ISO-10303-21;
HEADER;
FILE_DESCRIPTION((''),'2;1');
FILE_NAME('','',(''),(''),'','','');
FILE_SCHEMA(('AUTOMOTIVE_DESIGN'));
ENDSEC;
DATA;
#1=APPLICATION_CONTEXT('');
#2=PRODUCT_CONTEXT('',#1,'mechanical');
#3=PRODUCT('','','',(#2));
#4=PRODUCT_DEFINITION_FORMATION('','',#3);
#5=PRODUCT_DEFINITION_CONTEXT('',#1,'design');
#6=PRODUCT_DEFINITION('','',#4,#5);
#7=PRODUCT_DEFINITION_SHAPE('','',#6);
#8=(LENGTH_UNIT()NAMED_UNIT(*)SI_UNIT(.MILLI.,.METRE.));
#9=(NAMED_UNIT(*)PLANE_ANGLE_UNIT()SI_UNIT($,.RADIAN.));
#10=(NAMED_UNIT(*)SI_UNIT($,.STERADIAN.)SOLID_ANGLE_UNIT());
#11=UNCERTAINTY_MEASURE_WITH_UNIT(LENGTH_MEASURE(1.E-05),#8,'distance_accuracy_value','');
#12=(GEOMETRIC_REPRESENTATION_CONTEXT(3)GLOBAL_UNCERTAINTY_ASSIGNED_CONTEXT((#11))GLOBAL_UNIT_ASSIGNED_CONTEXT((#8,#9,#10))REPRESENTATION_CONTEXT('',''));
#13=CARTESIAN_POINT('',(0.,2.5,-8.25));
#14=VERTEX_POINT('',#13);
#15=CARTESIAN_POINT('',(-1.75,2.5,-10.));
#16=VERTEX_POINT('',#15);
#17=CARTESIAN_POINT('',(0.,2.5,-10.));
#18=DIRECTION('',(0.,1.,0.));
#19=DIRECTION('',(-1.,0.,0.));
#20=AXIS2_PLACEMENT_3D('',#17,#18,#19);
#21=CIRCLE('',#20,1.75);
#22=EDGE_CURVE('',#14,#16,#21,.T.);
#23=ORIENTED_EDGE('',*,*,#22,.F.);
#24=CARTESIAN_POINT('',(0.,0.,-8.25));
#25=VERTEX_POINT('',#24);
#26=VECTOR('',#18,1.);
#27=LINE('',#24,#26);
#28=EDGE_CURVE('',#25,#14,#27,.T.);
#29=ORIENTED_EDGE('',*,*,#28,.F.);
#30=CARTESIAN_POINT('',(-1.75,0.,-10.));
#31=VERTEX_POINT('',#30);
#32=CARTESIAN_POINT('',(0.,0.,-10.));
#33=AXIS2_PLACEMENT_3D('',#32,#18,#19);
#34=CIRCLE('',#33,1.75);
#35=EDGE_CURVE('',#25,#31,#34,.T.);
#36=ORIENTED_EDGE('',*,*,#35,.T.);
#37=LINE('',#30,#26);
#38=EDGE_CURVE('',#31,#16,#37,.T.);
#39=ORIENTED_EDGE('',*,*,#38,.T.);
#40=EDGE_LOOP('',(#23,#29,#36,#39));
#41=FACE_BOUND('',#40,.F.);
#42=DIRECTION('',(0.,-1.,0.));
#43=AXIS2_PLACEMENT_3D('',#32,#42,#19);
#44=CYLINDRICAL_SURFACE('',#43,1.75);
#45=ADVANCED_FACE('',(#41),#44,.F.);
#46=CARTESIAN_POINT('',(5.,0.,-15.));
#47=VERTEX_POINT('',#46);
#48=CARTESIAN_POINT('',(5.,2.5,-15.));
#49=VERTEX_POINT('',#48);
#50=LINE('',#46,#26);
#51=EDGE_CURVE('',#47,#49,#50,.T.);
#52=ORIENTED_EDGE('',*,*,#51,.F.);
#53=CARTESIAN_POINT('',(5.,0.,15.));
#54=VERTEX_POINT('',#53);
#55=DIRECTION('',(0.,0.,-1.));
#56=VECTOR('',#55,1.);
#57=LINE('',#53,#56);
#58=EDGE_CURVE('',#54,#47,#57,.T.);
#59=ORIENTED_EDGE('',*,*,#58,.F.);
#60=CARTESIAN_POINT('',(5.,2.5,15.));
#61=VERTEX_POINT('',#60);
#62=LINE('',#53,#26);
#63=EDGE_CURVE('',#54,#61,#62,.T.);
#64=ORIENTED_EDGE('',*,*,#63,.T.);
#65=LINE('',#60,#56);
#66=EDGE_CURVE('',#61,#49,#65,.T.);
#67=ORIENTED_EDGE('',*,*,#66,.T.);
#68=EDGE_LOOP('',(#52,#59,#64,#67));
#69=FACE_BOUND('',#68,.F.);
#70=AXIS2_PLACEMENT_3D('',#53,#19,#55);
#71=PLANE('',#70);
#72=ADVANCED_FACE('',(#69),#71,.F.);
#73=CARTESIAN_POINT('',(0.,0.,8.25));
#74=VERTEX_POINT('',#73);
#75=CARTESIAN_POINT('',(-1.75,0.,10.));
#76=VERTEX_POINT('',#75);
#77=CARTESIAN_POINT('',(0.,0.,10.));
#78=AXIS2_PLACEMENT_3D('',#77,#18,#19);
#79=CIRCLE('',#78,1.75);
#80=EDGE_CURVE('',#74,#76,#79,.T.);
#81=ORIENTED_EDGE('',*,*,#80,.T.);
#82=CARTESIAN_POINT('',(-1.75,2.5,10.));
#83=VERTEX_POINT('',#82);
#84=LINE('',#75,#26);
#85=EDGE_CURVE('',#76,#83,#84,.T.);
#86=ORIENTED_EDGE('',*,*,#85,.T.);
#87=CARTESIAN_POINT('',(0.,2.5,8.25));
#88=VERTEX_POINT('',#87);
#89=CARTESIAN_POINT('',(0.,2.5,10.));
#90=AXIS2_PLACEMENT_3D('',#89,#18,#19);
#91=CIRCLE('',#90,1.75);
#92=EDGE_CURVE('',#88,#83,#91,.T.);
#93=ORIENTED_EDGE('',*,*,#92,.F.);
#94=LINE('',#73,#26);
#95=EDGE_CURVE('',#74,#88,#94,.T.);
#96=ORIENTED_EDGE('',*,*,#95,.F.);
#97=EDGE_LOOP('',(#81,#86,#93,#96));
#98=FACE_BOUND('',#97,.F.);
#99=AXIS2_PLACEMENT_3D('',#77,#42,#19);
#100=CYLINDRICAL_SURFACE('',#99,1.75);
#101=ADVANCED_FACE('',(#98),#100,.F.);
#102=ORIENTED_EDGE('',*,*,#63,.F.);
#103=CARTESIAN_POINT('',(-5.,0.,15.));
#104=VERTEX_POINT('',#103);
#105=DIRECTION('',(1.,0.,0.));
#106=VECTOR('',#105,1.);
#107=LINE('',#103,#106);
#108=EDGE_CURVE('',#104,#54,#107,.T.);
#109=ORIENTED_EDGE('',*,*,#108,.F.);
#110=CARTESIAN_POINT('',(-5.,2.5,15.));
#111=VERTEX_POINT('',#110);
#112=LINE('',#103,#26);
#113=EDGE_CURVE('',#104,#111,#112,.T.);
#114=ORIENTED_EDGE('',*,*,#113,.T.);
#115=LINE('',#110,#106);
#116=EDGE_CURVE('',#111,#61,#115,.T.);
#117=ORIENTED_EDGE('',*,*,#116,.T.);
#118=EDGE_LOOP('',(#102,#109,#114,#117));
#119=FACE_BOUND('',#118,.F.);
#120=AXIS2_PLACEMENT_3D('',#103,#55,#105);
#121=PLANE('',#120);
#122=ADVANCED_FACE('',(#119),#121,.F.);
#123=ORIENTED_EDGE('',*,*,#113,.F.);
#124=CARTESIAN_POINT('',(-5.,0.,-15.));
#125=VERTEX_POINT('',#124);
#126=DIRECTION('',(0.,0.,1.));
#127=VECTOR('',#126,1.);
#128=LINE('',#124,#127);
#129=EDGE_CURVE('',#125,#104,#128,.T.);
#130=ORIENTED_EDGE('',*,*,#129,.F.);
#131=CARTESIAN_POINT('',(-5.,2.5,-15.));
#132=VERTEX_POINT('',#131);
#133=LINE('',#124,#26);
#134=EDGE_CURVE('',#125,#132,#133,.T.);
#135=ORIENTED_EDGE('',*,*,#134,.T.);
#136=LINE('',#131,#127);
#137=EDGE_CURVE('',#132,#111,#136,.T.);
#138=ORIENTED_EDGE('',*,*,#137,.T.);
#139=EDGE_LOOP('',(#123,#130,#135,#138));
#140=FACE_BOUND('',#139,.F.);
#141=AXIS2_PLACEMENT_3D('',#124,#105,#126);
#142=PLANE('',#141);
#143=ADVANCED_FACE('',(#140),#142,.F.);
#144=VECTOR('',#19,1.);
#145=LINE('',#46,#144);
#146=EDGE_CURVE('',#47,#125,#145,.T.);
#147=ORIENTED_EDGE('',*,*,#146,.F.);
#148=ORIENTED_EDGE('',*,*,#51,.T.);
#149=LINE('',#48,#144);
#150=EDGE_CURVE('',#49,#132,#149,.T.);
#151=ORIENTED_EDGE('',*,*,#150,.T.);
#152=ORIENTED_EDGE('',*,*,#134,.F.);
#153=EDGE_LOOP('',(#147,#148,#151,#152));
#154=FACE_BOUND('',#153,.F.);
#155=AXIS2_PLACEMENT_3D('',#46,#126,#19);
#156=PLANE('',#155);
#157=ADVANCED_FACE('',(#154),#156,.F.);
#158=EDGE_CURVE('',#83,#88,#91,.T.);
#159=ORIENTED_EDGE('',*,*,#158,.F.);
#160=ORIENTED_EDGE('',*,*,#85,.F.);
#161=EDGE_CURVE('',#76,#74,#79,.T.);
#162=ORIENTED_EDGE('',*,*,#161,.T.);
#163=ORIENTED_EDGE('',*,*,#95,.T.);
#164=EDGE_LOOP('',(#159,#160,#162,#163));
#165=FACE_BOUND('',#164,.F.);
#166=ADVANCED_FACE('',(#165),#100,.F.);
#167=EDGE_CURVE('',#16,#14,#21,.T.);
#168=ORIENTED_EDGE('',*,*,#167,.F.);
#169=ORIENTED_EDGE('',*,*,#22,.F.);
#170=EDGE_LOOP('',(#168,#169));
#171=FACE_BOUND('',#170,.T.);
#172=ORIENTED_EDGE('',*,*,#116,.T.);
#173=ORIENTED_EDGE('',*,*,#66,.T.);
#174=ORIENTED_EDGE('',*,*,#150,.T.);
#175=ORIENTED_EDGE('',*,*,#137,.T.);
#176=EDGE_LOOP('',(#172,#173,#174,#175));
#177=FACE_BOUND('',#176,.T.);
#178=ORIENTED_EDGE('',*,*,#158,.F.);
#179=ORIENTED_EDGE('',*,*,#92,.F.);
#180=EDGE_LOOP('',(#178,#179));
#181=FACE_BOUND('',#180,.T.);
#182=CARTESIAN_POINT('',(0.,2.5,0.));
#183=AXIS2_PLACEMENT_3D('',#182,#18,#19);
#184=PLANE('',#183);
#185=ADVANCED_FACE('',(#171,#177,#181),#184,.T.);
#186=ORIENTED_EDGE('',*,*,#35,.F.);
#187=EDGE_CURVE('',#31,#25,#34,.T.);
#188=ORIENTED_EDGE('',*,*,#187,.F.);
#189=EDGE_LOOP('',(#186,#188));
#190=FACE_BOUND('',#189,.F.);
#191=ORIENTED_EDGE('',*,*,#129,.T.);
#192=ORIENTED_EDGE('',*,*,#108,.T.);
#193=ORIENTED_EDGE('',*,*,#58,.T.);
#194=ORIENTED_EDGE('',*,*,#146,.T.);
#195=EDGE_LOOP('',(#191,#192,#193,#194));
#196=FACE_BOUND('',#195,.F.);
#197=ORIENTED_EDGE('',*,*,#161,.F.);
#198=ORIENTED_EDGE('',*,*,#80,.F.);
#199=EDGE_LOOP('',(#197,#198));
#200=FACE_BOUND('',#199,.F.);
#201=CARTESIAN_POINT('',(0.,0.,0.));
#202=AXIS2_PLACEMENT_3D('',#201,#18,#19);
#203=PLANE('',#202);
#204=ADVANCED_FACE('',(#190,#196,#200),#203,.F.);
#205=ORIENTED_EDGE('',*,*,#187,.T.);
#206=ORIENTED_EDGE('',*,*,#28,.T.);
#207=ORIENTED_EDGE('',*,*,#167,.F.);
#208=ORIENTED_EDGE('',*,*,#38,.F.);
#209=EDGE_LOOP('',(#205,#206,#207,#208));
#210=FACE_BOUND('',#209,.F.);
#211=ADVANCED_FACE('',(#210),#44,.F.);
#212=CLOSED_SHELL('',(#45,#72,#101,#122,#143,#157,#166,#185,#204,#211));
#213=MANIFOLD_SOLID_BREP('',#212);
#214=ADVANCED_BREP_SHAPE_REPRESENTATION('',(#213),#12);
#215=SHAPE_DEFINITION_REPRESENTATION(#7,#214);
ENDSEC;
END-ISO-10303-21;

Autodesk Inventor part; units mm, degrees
ref_plane "YZ Plane" through (0, 0, 0) normal (1, 0, 0) x (0, 1, 0)
ref_plane "XZ Plane" through (0, 0, 0) normal (0, 1, 0) x (-1, 0, 0)
ref_plane "XY Plane" through (0, 0, 0) normal (0, 0, 1) x (1, 0, 0)
sketch "Boceto1" plane through (0, 0, 0) normal (0, 1, 0) x (-1, 0, 0)
  circle A0 centre (0, 10) radius 1.75
  circle A1 centre (0, -10) radius 1.75
  line L0 (0, 10) -> (0, -10)
  line L1 (5, 15) -> (-5, 15)
  line L2 (-5, 15) -> (-5, -15)
  line L3 (-5, -15) -> (5, -15)
  line L4 (5, -15) -> (5, 15)
  line L5 (5, 15) -> (-5, -15) construction
  line L6 (-5, 15) -> (5, -15) construction
  point P0 (0, 0)
  point P1 (0, 0)
extrude "Extrusión1" add sketch "Boceto1" along normal blind 2.5
properties part number "standard_union"
